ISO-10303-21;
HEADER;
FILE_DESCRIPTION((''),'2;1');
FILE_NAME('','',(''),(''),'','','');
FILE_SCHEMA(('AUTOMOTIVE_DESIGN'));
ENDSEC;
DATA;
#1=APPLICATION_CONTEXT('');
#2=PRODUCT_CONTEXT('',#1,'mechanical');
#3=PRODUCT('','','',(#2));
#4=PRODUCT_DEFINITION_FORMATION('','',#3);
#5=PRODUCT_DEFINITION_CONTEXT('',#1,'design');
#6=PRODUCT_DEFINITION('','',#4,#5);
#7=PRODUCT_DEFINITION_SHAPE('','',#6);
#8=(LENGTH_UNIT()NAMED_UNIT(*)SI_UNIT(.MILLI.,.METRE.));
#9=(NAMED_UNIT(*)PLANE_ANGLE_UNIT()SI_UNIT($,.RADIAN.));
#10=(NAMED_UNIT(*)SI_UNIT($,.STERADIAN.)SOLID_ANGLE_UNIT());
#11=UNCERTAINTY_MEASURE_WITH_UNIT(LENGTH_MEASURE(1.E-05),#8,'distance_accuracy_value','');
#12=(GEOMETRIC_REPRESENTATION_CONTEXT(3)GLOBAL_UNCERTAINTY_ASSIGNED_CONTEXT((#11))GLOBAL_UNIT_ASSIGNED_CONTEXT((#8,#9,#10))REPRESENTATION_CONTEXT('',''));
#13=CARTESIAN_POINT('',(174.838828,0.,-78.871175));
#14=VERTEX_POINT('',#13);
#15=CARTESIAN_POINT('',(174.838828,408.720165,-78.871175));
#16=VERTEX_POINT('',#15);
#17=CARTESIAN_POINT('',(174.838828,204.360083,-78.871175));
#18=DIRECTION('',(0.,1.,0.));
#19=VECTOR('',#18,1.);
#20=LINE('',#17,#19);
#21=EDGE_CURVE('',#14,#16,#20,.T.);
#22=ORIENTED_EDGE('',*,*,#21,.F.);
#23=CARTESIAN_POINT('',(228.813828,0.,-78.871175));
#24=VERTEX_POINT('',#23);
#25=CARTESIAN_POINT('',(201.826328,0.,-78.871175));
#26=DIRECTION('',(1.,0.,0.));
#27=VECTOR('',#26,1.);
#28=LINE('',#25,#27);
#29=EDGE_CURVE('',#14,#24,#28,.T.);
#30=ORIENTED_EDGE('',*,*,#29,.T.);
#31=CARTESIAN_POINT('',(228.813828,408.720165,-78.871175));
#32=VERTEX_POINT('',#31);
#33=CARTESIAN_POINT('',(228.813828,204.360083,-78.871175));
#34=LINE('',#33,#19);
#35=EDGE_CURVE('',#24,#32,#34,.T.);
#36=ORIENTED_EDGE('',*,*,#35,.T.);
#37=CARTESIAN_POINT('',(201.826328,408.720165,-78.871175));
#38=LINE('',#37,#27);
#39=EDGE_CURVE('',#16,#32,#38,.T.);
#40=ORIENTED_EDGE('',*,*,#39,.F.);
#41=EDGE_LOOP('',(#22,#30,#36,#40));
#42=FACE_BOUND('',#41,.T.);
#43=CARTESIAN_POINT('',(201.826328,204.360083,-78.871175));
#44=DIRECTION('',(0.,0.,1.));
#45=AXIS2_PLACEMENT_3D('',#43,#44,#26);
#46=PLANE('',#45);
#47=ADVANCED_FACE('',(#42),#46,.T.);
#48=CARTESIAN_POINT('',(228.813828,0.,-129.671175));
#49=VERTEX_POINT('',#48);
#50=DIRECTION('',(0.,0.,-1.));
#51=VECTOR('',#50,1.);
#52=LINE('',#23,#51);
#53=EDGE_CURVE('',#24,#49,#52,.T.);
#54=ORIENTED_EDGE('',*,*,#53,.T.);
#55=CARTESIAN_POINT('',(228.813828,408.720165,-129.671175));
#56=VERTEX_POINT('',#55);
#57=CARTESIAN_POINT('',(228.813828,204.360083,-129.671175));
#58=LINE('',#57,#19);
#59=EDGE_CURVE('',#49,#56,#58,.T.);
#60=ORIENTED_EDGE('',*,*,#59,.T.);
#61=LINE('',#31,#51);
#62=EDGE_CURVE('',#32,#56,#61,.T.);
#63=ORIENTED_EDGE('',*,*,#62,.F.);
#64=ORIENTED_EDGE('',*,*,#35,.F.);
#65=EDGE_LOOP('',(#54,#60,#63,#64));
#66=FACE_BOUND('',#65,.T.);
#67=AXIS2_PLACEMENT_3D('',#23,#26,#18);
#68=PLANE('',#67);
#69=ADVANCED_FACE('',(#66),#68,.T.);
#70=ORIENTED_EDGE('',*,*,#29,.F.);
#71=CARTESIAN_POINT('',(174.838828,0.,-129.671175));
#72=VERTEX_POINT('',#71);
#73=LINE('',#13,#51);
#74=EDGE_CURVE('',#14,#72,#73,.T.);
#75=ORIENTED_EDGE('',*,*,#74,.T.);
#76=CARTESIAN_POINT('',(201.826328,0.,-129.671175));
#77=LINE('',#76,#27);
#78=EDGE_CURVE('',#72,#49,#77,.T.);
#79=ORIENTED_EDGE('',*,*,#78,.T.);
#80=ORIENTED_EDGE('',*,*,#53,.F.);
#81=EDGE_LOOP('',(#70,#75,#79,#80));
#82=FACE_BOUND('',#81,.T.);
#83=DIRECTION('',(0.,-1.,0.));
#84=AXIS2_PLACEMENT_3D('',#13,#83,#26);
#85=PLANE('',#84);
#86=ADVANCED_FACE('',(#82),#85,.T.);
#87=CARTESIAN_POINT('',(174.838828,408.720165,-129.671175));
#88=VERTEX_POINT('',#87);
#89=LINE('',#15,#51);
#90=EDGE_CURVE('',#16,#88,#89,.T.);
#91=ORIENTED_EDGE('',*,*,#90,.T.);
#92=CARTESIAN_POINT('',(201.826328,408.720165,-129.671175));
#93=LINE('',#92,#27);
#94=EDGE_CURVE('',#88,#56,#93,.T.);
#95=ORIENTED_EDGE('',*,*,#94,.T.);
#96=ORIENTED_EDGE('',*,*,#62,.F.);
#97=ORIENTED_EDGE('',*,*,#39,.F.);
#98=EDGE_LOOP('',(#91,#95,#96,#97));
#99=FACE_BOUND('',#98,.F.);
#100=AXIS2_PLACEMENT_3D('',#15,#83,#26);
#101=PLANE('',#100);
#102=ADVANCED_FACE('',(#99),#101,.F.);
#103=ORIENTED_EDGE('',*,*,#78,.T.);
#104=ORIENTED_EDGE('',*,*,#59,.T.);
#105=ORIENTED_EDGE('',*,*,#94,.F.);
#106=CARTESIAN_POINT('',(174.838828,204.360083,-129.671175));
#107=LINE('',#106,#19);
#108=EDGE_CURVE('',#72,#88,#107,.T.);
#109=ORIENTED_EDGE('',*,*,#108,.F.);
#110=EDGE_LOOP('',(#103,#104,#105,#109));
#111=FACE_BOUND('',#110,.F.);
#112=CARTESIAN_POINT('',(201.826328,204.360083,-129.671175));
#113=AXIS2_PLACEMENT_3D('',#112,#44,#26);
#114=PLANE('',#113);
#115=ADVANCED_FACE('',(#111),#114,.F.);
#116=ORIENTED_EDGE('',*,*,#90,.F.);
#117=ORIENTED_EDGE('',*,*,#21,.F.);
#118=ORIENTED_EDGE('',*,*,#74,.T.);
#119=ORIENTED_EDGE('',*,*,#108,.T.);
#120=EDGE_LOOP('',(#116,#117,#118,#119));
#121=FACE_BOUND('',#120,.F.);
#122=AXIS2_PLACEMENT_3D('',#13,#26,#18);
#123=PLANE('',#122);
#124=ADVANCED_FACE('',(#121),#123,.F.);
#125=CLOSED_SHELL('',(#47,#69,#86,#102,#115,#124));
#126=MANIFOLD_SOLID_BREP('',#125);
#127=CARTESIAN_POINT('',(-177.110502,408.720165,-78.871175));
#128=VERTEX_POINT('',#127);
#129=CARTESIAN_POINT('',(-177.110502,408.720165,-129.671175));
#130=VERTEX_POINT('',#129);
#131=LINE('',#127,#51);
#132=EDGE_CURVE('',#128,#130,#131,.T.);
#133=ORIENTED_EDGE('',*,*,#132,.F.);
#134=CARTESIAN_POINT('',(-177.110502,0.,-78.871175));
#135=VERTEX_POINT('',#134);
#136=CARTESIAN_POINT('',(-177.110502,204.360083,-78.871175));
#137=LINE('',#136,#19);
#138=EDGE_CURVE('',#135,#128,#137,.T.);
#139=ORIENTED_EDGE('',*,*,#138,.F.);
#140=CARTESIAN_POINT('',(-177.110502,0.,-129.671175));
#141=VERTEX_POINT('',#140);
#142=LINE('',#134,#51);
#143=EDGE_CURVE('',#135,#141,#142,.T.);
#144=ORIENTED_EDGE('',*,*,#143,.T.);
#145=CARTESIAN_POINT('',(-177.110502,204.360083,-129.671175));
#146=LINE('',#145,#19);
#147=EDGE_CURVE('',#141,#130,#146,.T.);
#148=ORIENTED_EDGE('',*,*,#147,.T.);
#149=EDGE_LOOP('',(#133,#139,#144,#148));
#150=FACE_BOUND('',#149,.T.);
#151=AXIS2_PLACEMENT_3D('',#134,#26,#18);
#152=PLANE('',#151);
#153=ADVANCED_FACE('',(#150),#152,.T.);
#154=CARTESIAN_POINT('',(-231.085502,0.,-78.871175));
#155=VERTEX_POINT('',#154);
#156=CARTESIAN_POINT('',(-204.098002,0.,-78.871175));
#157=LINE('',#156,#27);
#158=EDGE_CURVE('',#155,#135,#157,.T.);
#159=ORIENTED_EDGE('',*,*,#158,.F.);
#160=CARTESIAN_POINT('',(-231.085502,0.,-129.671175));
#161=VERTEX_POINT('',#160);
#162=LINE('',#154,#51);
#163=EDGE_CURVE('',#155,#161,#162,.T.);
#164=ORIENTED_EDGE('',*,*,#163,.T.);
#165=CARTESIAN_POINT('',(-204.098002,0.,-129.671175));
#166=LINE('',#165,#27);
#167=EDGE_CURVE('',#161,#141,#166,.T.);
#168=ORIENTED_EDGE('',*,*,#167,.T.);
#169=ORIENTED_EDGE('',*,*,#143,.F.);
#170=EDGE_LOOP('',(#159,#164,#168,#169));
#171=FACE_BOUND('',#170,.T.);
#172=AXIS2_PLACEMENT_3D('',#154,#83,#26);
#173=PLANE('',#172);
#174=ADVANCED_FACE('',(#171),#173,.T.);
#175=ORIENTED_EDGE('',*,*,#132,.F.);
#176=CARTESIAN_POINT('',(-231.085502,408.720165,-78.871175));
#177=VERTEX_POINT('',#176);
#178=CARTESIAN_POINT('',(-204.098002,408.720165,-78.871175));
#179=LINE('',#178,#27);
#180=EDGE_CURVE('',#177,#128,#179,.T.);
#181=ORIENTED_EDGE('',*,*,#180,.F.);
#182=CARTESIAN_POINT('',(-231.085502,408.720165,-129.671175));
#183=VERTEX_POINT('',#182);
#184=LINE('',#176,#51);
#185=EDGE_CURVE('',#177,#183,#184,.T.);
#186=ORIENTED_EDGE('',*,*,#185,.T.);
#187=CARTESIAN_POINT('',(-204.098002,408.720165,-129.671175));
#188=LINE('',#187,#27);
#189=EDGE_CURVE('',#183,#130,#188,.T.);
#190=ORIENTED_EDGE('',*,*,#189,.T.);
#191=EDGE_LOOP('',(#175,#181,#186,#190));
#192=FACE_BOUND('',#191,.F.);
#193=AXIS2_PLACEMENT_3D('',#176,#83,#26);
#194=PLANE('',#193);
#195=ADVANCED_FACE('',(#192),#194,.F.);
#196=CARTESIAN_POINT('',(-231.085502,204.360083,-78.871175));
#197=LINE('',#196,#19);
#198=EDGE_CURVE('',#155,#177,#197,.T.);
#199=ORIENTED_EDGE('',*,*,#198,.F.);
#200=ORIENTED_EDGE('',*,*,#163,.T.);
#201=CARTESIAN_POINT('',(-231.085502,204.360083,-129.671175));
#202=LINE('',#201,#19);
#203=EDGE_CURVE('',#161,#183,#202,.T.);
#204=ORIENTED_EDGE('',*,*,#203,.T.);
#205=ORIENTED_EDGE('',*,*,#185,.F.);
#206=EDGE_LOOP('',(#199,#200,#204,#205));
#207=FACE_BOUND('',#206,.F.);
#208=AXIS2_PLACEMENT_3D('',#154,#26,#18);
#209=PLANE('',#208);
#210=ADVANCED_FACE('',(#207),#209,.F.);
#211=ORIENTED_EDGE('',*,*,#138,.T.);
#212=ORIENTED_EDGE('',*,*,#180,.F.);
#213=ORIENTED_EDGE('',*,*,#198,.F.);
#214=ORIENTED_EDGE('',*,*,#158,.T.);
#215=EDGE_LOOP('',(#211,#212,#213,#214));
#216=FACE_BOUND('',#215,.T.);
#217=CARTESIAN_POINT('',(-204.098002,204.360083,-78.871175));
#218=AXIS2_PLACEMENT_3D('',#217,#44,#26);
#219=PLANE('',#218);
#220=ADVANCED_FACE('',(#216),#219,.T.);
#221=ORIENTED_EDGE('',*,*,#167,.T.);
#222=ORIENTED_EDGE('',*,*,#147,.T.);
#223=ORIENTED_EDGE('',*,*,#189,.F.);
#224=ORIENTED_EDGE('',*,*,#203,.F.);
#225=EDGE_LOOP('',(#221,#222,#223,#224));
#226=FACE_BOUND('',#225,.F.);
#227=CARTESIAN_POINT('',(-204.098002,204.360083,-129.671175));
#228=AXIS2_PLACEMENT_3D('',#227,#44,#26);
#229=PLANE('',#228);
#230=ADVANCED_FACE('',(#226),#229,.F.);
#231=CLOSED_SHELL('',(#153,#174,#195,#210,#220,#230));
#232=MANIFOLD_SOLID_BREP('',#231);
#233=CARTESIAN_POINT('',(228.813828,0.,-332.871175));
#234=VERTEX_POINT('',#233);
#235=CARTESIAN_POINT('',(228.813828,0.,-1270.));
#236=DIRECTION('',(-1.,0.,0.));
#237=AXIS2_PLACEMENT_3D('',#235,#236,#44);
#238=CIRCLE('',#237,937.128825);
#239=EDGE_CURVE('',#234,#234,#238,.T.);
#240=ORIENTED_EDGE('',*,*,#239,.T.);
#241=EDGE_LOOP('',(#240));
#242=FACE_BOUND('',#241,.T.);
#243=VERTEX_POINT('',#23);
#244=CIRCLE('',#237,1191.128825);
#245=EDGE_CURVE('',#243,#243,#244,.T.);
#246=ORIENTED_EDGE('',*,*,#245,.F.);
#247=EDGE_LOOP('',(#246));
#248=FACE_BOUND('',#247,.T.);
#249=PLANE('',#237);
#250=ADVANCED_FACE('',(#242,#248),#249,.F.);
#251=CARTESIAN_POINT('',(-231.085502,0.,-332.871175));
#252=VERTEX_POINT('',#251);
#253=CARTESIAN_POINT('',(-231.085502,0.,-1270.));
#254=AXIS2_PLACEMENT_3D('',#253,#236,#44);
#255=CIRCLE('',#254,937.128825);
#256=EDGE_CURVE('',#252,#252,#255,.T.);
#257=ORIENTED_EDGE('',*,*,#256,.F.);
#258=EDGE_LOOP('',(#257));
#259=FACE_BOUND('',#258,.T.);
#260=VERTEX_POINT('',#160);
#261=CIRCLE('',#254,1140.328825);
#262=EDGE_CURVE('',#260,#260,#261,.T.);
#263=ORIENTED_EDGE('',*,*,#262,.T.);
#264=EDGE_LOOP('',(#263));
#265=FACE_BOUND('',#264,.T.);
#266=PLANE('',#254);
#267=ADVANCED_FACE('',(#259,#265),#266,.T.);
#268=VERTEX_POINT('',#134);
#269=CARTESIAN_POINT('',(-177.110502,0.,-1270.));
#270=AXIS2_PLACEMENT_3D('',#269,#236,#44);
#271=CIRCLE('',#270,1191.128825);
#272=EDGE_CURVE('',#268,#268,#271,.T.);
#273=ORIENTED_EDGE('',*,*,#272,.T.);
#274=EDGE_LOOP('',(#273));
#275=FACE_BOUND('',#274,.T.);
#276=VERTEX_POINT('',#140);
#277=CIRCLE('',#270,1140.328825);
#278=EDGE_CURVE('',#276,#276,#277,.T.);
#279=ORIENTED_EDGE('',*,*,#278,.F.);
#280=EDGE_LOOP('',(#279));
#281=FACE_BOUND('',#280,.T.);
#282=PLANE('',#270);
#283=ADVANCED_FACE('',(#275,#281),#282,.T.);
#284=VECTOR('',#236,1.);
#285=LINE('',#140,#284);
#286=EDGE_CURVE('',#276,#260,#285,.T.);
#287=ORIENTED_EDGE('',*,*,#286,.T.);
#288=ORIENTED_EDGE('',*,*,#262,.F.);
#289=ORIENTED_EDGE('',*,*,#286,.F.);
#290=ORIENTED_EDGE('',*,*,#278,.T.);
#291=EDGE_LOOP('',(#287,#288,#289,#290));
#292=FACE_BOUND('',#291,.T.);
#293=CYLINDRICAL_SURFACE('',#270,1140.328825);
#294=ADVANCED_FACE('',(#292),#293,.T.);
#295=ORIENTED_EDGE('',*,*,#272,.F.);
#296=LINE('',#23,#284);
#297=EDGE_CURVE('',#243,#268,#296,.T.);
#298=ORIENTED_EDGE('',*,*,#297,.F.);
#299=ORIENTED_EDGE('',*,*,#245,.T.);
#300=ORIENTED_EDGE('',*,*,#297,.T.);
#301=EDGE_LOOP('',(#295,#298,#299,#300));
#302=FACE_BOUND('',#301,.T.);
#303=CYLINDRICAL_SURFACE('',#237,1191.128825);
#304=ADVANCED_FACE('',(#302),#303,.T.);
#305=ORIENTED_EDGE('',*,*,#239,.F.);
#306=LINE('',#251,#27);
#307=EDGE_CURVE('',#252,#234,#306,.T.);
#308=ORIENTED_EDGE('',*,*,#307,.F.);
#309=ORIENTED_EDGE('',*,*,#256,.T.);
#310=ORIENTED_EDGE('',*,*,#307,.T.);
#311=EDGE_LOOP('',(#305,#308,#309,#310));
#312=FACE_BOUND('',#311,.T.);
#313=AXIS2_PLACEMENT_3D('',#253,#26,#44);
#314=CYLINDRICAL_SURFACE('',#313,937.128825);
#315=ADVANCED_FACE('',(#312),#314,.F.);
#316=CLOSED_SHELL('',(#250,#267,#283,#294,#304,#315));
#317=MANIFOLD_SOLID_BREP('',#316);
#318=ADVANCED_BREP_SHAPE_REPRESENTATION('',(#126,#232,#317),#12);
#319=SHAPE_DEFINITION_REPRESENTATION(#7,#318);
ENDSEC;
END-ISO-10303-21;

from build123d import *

# Parameters (mm, degrees)
F3_W     = 53.975
F3_H     = 408.7201654911
F4_DEPTH = 50.8


# Not quite as in the source:
# - the program builds the solid bodies; features that only make, move or delete a surface that nothing else refers to are left out


with BuildPart() as f4:
    # F3 (on face) → F4 (new body)
    with BuildSketch(Plane.XY.offset(-78.8711753155)):
        with Locations((-204.0980024693, 204.3600827456)):
            Rectangle(F3_W, F3_H)
    extrude(amount=-F4_DEPTH)


with BuildPart() as f4b:
    # F3 (on face) → F4, piece 2 (new body)
    with BuildSketch(Plane.XY.offset(-78.8711753155)):
        with Locations((201.8263277109, 204.3600827456)):
            Rectangle(F3_W, F3_H)
    extrude(amount=-F4_DEPTH)


with BuildPart() as f8:
    # F7 (on face) → F8 (revolve)
    with BuildSketch(Plane.XZ):
        Polygon((228.8138277109, -78.8711753155), (-177.1105024693, -78.8711753155), (-177.1105024693, -129.6711753155), (-231.0855024693, -129.6711753155), (-231.0855024693, -332.8711753155), (228.8138277109, -332.8711753155), align=None)
    revolve(axis=Axis((2.4814261124, 0, -1270), (-1, 0, 0)))


solid = Compound([f4.part, f4b.part, f8.part])
